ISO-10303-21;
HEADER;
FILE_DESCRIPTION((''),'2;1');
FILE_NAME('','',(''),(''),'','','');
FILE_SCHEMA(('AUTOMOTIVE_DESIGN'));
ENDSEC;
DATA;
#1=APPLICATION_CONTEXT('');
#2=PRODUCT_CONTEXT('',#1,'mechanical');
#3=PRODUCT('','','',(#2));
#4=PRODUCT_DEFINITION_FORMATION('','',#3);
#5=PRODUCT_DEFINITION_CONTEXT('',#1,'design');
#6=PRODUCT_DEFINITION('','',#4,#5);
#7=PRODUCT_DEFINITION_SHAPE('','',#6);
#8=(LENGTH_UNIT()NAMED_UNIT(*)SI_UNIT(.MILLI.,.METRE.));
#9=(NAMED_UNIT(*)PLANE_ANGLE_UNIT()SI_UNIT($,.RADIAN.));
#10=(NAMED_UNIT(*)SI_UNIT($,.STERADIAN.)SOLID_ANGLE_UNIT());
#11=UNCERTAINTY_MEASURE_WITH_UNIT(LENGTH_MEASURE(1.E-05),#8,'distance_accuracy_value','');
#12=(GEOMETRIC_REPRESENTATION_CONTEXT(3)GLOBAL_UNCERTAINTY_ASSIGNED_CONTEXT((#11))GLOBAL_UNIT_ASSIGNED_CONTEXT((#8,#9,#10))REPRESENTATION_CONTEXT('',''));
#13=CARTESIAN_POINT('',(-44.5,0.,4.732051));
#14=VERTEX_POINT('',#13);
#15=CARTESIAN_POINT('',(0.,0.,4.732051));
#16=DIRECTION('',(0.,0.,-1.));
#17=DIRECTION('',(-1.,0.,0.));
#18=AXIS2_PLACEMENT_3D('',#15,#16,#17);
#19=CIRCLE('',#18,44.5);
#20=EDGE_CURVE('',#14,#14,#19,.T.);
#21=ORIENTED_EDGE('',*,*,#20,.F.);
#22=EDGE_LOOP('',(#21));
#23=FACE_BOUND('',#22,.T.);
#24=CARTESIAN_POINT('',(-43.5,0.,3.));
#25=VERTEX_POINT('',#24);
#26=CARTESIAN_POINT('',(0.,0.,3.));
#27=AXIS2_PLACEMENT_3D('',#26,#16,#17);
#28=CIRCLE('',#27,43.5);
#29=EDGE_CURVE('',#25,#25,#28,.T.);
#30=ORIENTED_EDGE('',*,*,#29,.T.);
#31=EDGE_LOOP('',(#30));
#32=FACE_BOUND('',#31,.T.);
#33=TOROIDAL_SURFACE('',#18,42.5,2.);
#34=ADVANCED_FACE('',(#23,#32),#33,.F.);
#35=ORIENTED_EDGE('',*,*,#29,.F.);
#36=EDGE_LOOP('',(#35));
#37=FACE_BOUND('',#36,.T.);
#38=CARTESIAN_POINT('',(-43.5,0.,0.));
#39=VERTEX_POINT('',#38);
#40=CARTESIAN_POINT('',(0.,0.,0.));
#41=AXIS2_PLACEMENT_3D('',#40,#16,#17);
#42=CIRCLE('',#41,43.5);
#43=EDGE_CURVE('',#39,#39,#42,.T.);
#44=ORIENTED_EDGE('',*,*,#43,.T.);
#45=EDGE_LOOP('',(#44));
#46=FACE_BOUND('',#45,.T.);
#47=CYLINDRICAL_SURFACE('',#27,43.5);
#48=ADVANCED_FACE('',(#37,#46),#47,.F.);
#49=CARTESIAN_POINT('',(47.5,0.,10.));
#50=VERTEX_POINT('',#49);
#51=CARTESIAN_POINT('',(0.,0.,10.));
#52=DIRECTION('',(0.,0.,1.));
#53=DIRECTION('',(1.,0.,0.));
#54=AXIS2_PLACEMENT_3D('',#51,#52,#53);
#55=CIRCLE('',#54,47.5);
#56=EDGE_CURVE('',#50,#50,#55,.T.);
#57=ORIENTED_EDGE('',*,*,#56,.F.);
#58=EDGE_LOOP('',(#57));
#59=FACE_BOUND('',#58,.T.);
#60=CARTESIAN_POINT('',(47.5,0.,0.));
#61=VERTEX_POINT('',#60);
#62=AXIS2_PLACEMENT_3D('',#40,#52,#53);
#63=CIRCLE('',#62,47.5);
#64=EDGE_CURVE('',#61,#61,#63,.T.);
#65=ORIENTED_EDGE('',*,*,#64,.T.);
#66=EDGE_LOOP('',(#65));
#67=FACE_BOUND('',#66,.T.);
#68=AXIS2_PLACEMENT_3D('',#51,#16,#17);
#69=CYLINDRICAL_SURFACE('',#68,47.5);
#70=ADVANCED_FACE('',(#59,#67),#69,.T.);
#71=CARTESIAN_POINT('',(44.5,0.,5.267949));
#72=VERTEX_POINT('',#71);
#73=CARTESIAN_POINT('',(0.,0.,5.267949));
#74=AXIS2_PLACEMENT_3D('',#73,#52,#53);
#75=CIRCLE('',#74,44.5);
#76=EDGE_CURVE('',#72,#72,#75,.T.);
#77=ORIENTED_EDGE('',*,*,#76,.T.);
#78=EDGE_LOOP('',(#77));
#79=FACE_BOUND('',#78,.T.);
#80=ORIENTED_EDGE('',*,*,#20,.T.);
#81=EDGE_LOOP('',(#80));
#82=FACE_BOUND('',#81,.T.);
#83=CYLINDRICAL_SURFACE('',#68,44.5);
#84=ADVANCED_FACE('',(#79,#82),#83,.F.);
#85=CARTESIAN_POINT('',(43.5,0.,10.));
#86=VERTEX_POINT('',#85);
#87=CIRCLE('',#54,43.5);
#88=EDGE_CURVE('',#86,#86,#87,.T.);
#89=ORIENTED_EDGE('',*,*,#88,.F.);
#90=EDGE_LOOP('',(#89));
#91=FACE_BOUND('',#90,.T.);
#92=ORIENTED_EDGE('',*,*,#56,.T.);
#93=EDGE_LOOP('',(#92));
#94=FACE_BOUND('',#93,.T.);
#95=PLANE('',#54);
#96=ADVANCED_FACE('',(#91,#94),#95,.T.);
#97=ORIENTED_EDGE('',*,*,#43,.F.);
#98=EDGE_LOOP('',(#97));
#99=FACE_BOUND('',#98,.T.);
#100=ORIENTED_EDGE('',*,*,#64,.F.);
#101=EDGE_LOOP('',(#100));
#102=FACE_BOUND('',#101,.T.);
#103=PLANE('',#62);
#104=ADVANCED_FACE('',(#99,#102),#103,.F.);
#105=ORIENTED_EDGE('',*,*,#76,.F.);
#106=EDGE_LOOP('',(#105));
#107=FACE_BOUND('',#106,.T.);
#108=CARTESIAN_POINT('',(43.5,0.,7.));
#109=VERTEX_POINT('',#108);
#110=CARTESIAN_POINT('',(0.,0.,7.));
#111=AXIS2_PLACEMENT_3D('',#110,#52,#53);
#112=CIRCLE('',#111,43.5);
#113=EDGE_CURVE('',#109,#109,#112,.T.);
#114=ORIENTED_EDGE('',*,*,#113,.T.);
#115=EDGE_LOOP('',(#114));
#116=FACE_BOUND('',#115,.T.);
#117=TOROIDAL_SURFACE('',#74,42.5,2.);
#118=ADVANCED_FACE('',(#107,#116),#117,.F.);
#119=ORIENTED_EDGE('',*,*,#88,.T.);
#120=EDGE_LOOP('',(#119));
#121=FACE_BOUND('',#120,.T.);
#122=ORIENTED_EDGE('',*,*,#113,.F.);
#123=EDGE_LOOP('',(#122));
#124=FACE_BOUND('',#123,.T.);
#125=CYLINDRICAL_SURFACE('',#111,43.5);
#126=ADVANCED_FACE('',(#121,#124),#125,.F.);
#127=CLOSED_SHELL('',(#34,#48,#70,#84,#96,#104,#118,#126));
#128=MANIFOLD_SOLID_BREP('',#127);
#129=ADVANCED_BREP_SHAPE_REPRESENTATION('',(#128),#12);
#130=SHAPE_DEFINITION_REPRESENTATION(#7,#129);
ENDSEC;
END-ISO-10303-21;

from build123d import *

# Parameters (mm, degrees)
SKETCH_1_R      = 47.5
SKETCH_1_R_2    = 44.5
EXTRUDE_2_DEPTH = 10
EXTRUDE_START   = -3
SKETCH_2_R      = 44.5
SKETCH_2_R_2    = 43.5
EXTRUDE_3_DEPTH = 3
FILLET_1_R      = 2
SKETCH_3_R      = 44.5
SKETCH_3_R_2    = 43.5
EXTRUDE_4_DEPTH = 3
FILLET_2_R      = 2


with BuildPart() as part:
    # 草图1 → 凸台-拉伸2 (new body)
    with BuildSketch(Plane.XY):
        Circle(SKETCH_1_R)
        Circle(SKETCH_1_R_2, mode=Mode.SUBTRACT)
    extrude(amount=EXTRUDE_2_DEPTH)

    # 草图2 → 凸台-拉伸3 (add)
    with BuildSketch(Plane.XY.offset(10).offset(EXTRUDE_START)):
        Circle(SKETCH_2_R)
        Circle(SKETCH_2_R_2, mode=Mode.SUBTRACT)
    extrude(amount=EXTRUDE_3_DEPTH)

    # 圆角1
    # the kernel refuses this fillet: 2 mm, written as the material it adds along each edge
    with BuildSketch(Plane(origin=(0, 0, 7), x_dir=(1, 0, 0), z_dir=(0, -1, 0))) as fillet_1_piece_1:
        with BuildLine():
            CenterArc((42.5, -1.732050808), FILLET_1_R, 0, 60)
            Line((43.5, 0), (43.52, 0.034641016))
            ThreePointArc((43.52, 0.034641016), (44, 0.04), (44.5, 0.04))
            Line((44.5, 0.04), (44.54, 0))
            Line((44.54, 0), (44.54, -1.732050808))
            Line((44.54, -1.732050808), (44.5, -1.732050808))
        make_face()
    revolve(axis=Axis((0, 0, 7), (0, 0, 1)))

    # 草图3 → 凸台-拉伸4 (add)
    with BuildSketch(Plane(origin=(0, 0, 0), x_dir=(-1, 0, 0), z_dir=(0, 0, -1))):
        Circle(SKETCH_3_R)
        with Locations(Location((0, 0, 0), (0, 0, 180))):
            Circle(SKETCH_3_R_2, mode=Mode.SUBTRACT)
    extrude(amount=-EXTRUDE_4_DEPTH)

    # 圆角2
    # the kernel refuses this fillet: 2 mm, written as the material it adds along each edge
    with BuildSketch(Plane(origin=(0, 0, 3), x_dir=(1, 0, 0), z_dir=(0, 1, 0))) as fillet_2_piece_1:
        with BuildLine():
            CenterArc((42.5, -1.732050808), FILLET_2_R, 0, 60)
            Line((43.5, 0), (43.52, 0.034641016))
            ThreePointArc((43.52, 0.034641016), (44, 0.04), (44.5, 0.04))
            Line((44.5, 0.04), (44.54, 0))
            Line((44.54, 0), (44.54, -1.732050808))
            Line((44.54, -1.732050808), (44.5, -1.732050808))
        make_face()
    revolve(axis=Axis((0, 0, 3), (0, 0, -1)))


solid = part.part
